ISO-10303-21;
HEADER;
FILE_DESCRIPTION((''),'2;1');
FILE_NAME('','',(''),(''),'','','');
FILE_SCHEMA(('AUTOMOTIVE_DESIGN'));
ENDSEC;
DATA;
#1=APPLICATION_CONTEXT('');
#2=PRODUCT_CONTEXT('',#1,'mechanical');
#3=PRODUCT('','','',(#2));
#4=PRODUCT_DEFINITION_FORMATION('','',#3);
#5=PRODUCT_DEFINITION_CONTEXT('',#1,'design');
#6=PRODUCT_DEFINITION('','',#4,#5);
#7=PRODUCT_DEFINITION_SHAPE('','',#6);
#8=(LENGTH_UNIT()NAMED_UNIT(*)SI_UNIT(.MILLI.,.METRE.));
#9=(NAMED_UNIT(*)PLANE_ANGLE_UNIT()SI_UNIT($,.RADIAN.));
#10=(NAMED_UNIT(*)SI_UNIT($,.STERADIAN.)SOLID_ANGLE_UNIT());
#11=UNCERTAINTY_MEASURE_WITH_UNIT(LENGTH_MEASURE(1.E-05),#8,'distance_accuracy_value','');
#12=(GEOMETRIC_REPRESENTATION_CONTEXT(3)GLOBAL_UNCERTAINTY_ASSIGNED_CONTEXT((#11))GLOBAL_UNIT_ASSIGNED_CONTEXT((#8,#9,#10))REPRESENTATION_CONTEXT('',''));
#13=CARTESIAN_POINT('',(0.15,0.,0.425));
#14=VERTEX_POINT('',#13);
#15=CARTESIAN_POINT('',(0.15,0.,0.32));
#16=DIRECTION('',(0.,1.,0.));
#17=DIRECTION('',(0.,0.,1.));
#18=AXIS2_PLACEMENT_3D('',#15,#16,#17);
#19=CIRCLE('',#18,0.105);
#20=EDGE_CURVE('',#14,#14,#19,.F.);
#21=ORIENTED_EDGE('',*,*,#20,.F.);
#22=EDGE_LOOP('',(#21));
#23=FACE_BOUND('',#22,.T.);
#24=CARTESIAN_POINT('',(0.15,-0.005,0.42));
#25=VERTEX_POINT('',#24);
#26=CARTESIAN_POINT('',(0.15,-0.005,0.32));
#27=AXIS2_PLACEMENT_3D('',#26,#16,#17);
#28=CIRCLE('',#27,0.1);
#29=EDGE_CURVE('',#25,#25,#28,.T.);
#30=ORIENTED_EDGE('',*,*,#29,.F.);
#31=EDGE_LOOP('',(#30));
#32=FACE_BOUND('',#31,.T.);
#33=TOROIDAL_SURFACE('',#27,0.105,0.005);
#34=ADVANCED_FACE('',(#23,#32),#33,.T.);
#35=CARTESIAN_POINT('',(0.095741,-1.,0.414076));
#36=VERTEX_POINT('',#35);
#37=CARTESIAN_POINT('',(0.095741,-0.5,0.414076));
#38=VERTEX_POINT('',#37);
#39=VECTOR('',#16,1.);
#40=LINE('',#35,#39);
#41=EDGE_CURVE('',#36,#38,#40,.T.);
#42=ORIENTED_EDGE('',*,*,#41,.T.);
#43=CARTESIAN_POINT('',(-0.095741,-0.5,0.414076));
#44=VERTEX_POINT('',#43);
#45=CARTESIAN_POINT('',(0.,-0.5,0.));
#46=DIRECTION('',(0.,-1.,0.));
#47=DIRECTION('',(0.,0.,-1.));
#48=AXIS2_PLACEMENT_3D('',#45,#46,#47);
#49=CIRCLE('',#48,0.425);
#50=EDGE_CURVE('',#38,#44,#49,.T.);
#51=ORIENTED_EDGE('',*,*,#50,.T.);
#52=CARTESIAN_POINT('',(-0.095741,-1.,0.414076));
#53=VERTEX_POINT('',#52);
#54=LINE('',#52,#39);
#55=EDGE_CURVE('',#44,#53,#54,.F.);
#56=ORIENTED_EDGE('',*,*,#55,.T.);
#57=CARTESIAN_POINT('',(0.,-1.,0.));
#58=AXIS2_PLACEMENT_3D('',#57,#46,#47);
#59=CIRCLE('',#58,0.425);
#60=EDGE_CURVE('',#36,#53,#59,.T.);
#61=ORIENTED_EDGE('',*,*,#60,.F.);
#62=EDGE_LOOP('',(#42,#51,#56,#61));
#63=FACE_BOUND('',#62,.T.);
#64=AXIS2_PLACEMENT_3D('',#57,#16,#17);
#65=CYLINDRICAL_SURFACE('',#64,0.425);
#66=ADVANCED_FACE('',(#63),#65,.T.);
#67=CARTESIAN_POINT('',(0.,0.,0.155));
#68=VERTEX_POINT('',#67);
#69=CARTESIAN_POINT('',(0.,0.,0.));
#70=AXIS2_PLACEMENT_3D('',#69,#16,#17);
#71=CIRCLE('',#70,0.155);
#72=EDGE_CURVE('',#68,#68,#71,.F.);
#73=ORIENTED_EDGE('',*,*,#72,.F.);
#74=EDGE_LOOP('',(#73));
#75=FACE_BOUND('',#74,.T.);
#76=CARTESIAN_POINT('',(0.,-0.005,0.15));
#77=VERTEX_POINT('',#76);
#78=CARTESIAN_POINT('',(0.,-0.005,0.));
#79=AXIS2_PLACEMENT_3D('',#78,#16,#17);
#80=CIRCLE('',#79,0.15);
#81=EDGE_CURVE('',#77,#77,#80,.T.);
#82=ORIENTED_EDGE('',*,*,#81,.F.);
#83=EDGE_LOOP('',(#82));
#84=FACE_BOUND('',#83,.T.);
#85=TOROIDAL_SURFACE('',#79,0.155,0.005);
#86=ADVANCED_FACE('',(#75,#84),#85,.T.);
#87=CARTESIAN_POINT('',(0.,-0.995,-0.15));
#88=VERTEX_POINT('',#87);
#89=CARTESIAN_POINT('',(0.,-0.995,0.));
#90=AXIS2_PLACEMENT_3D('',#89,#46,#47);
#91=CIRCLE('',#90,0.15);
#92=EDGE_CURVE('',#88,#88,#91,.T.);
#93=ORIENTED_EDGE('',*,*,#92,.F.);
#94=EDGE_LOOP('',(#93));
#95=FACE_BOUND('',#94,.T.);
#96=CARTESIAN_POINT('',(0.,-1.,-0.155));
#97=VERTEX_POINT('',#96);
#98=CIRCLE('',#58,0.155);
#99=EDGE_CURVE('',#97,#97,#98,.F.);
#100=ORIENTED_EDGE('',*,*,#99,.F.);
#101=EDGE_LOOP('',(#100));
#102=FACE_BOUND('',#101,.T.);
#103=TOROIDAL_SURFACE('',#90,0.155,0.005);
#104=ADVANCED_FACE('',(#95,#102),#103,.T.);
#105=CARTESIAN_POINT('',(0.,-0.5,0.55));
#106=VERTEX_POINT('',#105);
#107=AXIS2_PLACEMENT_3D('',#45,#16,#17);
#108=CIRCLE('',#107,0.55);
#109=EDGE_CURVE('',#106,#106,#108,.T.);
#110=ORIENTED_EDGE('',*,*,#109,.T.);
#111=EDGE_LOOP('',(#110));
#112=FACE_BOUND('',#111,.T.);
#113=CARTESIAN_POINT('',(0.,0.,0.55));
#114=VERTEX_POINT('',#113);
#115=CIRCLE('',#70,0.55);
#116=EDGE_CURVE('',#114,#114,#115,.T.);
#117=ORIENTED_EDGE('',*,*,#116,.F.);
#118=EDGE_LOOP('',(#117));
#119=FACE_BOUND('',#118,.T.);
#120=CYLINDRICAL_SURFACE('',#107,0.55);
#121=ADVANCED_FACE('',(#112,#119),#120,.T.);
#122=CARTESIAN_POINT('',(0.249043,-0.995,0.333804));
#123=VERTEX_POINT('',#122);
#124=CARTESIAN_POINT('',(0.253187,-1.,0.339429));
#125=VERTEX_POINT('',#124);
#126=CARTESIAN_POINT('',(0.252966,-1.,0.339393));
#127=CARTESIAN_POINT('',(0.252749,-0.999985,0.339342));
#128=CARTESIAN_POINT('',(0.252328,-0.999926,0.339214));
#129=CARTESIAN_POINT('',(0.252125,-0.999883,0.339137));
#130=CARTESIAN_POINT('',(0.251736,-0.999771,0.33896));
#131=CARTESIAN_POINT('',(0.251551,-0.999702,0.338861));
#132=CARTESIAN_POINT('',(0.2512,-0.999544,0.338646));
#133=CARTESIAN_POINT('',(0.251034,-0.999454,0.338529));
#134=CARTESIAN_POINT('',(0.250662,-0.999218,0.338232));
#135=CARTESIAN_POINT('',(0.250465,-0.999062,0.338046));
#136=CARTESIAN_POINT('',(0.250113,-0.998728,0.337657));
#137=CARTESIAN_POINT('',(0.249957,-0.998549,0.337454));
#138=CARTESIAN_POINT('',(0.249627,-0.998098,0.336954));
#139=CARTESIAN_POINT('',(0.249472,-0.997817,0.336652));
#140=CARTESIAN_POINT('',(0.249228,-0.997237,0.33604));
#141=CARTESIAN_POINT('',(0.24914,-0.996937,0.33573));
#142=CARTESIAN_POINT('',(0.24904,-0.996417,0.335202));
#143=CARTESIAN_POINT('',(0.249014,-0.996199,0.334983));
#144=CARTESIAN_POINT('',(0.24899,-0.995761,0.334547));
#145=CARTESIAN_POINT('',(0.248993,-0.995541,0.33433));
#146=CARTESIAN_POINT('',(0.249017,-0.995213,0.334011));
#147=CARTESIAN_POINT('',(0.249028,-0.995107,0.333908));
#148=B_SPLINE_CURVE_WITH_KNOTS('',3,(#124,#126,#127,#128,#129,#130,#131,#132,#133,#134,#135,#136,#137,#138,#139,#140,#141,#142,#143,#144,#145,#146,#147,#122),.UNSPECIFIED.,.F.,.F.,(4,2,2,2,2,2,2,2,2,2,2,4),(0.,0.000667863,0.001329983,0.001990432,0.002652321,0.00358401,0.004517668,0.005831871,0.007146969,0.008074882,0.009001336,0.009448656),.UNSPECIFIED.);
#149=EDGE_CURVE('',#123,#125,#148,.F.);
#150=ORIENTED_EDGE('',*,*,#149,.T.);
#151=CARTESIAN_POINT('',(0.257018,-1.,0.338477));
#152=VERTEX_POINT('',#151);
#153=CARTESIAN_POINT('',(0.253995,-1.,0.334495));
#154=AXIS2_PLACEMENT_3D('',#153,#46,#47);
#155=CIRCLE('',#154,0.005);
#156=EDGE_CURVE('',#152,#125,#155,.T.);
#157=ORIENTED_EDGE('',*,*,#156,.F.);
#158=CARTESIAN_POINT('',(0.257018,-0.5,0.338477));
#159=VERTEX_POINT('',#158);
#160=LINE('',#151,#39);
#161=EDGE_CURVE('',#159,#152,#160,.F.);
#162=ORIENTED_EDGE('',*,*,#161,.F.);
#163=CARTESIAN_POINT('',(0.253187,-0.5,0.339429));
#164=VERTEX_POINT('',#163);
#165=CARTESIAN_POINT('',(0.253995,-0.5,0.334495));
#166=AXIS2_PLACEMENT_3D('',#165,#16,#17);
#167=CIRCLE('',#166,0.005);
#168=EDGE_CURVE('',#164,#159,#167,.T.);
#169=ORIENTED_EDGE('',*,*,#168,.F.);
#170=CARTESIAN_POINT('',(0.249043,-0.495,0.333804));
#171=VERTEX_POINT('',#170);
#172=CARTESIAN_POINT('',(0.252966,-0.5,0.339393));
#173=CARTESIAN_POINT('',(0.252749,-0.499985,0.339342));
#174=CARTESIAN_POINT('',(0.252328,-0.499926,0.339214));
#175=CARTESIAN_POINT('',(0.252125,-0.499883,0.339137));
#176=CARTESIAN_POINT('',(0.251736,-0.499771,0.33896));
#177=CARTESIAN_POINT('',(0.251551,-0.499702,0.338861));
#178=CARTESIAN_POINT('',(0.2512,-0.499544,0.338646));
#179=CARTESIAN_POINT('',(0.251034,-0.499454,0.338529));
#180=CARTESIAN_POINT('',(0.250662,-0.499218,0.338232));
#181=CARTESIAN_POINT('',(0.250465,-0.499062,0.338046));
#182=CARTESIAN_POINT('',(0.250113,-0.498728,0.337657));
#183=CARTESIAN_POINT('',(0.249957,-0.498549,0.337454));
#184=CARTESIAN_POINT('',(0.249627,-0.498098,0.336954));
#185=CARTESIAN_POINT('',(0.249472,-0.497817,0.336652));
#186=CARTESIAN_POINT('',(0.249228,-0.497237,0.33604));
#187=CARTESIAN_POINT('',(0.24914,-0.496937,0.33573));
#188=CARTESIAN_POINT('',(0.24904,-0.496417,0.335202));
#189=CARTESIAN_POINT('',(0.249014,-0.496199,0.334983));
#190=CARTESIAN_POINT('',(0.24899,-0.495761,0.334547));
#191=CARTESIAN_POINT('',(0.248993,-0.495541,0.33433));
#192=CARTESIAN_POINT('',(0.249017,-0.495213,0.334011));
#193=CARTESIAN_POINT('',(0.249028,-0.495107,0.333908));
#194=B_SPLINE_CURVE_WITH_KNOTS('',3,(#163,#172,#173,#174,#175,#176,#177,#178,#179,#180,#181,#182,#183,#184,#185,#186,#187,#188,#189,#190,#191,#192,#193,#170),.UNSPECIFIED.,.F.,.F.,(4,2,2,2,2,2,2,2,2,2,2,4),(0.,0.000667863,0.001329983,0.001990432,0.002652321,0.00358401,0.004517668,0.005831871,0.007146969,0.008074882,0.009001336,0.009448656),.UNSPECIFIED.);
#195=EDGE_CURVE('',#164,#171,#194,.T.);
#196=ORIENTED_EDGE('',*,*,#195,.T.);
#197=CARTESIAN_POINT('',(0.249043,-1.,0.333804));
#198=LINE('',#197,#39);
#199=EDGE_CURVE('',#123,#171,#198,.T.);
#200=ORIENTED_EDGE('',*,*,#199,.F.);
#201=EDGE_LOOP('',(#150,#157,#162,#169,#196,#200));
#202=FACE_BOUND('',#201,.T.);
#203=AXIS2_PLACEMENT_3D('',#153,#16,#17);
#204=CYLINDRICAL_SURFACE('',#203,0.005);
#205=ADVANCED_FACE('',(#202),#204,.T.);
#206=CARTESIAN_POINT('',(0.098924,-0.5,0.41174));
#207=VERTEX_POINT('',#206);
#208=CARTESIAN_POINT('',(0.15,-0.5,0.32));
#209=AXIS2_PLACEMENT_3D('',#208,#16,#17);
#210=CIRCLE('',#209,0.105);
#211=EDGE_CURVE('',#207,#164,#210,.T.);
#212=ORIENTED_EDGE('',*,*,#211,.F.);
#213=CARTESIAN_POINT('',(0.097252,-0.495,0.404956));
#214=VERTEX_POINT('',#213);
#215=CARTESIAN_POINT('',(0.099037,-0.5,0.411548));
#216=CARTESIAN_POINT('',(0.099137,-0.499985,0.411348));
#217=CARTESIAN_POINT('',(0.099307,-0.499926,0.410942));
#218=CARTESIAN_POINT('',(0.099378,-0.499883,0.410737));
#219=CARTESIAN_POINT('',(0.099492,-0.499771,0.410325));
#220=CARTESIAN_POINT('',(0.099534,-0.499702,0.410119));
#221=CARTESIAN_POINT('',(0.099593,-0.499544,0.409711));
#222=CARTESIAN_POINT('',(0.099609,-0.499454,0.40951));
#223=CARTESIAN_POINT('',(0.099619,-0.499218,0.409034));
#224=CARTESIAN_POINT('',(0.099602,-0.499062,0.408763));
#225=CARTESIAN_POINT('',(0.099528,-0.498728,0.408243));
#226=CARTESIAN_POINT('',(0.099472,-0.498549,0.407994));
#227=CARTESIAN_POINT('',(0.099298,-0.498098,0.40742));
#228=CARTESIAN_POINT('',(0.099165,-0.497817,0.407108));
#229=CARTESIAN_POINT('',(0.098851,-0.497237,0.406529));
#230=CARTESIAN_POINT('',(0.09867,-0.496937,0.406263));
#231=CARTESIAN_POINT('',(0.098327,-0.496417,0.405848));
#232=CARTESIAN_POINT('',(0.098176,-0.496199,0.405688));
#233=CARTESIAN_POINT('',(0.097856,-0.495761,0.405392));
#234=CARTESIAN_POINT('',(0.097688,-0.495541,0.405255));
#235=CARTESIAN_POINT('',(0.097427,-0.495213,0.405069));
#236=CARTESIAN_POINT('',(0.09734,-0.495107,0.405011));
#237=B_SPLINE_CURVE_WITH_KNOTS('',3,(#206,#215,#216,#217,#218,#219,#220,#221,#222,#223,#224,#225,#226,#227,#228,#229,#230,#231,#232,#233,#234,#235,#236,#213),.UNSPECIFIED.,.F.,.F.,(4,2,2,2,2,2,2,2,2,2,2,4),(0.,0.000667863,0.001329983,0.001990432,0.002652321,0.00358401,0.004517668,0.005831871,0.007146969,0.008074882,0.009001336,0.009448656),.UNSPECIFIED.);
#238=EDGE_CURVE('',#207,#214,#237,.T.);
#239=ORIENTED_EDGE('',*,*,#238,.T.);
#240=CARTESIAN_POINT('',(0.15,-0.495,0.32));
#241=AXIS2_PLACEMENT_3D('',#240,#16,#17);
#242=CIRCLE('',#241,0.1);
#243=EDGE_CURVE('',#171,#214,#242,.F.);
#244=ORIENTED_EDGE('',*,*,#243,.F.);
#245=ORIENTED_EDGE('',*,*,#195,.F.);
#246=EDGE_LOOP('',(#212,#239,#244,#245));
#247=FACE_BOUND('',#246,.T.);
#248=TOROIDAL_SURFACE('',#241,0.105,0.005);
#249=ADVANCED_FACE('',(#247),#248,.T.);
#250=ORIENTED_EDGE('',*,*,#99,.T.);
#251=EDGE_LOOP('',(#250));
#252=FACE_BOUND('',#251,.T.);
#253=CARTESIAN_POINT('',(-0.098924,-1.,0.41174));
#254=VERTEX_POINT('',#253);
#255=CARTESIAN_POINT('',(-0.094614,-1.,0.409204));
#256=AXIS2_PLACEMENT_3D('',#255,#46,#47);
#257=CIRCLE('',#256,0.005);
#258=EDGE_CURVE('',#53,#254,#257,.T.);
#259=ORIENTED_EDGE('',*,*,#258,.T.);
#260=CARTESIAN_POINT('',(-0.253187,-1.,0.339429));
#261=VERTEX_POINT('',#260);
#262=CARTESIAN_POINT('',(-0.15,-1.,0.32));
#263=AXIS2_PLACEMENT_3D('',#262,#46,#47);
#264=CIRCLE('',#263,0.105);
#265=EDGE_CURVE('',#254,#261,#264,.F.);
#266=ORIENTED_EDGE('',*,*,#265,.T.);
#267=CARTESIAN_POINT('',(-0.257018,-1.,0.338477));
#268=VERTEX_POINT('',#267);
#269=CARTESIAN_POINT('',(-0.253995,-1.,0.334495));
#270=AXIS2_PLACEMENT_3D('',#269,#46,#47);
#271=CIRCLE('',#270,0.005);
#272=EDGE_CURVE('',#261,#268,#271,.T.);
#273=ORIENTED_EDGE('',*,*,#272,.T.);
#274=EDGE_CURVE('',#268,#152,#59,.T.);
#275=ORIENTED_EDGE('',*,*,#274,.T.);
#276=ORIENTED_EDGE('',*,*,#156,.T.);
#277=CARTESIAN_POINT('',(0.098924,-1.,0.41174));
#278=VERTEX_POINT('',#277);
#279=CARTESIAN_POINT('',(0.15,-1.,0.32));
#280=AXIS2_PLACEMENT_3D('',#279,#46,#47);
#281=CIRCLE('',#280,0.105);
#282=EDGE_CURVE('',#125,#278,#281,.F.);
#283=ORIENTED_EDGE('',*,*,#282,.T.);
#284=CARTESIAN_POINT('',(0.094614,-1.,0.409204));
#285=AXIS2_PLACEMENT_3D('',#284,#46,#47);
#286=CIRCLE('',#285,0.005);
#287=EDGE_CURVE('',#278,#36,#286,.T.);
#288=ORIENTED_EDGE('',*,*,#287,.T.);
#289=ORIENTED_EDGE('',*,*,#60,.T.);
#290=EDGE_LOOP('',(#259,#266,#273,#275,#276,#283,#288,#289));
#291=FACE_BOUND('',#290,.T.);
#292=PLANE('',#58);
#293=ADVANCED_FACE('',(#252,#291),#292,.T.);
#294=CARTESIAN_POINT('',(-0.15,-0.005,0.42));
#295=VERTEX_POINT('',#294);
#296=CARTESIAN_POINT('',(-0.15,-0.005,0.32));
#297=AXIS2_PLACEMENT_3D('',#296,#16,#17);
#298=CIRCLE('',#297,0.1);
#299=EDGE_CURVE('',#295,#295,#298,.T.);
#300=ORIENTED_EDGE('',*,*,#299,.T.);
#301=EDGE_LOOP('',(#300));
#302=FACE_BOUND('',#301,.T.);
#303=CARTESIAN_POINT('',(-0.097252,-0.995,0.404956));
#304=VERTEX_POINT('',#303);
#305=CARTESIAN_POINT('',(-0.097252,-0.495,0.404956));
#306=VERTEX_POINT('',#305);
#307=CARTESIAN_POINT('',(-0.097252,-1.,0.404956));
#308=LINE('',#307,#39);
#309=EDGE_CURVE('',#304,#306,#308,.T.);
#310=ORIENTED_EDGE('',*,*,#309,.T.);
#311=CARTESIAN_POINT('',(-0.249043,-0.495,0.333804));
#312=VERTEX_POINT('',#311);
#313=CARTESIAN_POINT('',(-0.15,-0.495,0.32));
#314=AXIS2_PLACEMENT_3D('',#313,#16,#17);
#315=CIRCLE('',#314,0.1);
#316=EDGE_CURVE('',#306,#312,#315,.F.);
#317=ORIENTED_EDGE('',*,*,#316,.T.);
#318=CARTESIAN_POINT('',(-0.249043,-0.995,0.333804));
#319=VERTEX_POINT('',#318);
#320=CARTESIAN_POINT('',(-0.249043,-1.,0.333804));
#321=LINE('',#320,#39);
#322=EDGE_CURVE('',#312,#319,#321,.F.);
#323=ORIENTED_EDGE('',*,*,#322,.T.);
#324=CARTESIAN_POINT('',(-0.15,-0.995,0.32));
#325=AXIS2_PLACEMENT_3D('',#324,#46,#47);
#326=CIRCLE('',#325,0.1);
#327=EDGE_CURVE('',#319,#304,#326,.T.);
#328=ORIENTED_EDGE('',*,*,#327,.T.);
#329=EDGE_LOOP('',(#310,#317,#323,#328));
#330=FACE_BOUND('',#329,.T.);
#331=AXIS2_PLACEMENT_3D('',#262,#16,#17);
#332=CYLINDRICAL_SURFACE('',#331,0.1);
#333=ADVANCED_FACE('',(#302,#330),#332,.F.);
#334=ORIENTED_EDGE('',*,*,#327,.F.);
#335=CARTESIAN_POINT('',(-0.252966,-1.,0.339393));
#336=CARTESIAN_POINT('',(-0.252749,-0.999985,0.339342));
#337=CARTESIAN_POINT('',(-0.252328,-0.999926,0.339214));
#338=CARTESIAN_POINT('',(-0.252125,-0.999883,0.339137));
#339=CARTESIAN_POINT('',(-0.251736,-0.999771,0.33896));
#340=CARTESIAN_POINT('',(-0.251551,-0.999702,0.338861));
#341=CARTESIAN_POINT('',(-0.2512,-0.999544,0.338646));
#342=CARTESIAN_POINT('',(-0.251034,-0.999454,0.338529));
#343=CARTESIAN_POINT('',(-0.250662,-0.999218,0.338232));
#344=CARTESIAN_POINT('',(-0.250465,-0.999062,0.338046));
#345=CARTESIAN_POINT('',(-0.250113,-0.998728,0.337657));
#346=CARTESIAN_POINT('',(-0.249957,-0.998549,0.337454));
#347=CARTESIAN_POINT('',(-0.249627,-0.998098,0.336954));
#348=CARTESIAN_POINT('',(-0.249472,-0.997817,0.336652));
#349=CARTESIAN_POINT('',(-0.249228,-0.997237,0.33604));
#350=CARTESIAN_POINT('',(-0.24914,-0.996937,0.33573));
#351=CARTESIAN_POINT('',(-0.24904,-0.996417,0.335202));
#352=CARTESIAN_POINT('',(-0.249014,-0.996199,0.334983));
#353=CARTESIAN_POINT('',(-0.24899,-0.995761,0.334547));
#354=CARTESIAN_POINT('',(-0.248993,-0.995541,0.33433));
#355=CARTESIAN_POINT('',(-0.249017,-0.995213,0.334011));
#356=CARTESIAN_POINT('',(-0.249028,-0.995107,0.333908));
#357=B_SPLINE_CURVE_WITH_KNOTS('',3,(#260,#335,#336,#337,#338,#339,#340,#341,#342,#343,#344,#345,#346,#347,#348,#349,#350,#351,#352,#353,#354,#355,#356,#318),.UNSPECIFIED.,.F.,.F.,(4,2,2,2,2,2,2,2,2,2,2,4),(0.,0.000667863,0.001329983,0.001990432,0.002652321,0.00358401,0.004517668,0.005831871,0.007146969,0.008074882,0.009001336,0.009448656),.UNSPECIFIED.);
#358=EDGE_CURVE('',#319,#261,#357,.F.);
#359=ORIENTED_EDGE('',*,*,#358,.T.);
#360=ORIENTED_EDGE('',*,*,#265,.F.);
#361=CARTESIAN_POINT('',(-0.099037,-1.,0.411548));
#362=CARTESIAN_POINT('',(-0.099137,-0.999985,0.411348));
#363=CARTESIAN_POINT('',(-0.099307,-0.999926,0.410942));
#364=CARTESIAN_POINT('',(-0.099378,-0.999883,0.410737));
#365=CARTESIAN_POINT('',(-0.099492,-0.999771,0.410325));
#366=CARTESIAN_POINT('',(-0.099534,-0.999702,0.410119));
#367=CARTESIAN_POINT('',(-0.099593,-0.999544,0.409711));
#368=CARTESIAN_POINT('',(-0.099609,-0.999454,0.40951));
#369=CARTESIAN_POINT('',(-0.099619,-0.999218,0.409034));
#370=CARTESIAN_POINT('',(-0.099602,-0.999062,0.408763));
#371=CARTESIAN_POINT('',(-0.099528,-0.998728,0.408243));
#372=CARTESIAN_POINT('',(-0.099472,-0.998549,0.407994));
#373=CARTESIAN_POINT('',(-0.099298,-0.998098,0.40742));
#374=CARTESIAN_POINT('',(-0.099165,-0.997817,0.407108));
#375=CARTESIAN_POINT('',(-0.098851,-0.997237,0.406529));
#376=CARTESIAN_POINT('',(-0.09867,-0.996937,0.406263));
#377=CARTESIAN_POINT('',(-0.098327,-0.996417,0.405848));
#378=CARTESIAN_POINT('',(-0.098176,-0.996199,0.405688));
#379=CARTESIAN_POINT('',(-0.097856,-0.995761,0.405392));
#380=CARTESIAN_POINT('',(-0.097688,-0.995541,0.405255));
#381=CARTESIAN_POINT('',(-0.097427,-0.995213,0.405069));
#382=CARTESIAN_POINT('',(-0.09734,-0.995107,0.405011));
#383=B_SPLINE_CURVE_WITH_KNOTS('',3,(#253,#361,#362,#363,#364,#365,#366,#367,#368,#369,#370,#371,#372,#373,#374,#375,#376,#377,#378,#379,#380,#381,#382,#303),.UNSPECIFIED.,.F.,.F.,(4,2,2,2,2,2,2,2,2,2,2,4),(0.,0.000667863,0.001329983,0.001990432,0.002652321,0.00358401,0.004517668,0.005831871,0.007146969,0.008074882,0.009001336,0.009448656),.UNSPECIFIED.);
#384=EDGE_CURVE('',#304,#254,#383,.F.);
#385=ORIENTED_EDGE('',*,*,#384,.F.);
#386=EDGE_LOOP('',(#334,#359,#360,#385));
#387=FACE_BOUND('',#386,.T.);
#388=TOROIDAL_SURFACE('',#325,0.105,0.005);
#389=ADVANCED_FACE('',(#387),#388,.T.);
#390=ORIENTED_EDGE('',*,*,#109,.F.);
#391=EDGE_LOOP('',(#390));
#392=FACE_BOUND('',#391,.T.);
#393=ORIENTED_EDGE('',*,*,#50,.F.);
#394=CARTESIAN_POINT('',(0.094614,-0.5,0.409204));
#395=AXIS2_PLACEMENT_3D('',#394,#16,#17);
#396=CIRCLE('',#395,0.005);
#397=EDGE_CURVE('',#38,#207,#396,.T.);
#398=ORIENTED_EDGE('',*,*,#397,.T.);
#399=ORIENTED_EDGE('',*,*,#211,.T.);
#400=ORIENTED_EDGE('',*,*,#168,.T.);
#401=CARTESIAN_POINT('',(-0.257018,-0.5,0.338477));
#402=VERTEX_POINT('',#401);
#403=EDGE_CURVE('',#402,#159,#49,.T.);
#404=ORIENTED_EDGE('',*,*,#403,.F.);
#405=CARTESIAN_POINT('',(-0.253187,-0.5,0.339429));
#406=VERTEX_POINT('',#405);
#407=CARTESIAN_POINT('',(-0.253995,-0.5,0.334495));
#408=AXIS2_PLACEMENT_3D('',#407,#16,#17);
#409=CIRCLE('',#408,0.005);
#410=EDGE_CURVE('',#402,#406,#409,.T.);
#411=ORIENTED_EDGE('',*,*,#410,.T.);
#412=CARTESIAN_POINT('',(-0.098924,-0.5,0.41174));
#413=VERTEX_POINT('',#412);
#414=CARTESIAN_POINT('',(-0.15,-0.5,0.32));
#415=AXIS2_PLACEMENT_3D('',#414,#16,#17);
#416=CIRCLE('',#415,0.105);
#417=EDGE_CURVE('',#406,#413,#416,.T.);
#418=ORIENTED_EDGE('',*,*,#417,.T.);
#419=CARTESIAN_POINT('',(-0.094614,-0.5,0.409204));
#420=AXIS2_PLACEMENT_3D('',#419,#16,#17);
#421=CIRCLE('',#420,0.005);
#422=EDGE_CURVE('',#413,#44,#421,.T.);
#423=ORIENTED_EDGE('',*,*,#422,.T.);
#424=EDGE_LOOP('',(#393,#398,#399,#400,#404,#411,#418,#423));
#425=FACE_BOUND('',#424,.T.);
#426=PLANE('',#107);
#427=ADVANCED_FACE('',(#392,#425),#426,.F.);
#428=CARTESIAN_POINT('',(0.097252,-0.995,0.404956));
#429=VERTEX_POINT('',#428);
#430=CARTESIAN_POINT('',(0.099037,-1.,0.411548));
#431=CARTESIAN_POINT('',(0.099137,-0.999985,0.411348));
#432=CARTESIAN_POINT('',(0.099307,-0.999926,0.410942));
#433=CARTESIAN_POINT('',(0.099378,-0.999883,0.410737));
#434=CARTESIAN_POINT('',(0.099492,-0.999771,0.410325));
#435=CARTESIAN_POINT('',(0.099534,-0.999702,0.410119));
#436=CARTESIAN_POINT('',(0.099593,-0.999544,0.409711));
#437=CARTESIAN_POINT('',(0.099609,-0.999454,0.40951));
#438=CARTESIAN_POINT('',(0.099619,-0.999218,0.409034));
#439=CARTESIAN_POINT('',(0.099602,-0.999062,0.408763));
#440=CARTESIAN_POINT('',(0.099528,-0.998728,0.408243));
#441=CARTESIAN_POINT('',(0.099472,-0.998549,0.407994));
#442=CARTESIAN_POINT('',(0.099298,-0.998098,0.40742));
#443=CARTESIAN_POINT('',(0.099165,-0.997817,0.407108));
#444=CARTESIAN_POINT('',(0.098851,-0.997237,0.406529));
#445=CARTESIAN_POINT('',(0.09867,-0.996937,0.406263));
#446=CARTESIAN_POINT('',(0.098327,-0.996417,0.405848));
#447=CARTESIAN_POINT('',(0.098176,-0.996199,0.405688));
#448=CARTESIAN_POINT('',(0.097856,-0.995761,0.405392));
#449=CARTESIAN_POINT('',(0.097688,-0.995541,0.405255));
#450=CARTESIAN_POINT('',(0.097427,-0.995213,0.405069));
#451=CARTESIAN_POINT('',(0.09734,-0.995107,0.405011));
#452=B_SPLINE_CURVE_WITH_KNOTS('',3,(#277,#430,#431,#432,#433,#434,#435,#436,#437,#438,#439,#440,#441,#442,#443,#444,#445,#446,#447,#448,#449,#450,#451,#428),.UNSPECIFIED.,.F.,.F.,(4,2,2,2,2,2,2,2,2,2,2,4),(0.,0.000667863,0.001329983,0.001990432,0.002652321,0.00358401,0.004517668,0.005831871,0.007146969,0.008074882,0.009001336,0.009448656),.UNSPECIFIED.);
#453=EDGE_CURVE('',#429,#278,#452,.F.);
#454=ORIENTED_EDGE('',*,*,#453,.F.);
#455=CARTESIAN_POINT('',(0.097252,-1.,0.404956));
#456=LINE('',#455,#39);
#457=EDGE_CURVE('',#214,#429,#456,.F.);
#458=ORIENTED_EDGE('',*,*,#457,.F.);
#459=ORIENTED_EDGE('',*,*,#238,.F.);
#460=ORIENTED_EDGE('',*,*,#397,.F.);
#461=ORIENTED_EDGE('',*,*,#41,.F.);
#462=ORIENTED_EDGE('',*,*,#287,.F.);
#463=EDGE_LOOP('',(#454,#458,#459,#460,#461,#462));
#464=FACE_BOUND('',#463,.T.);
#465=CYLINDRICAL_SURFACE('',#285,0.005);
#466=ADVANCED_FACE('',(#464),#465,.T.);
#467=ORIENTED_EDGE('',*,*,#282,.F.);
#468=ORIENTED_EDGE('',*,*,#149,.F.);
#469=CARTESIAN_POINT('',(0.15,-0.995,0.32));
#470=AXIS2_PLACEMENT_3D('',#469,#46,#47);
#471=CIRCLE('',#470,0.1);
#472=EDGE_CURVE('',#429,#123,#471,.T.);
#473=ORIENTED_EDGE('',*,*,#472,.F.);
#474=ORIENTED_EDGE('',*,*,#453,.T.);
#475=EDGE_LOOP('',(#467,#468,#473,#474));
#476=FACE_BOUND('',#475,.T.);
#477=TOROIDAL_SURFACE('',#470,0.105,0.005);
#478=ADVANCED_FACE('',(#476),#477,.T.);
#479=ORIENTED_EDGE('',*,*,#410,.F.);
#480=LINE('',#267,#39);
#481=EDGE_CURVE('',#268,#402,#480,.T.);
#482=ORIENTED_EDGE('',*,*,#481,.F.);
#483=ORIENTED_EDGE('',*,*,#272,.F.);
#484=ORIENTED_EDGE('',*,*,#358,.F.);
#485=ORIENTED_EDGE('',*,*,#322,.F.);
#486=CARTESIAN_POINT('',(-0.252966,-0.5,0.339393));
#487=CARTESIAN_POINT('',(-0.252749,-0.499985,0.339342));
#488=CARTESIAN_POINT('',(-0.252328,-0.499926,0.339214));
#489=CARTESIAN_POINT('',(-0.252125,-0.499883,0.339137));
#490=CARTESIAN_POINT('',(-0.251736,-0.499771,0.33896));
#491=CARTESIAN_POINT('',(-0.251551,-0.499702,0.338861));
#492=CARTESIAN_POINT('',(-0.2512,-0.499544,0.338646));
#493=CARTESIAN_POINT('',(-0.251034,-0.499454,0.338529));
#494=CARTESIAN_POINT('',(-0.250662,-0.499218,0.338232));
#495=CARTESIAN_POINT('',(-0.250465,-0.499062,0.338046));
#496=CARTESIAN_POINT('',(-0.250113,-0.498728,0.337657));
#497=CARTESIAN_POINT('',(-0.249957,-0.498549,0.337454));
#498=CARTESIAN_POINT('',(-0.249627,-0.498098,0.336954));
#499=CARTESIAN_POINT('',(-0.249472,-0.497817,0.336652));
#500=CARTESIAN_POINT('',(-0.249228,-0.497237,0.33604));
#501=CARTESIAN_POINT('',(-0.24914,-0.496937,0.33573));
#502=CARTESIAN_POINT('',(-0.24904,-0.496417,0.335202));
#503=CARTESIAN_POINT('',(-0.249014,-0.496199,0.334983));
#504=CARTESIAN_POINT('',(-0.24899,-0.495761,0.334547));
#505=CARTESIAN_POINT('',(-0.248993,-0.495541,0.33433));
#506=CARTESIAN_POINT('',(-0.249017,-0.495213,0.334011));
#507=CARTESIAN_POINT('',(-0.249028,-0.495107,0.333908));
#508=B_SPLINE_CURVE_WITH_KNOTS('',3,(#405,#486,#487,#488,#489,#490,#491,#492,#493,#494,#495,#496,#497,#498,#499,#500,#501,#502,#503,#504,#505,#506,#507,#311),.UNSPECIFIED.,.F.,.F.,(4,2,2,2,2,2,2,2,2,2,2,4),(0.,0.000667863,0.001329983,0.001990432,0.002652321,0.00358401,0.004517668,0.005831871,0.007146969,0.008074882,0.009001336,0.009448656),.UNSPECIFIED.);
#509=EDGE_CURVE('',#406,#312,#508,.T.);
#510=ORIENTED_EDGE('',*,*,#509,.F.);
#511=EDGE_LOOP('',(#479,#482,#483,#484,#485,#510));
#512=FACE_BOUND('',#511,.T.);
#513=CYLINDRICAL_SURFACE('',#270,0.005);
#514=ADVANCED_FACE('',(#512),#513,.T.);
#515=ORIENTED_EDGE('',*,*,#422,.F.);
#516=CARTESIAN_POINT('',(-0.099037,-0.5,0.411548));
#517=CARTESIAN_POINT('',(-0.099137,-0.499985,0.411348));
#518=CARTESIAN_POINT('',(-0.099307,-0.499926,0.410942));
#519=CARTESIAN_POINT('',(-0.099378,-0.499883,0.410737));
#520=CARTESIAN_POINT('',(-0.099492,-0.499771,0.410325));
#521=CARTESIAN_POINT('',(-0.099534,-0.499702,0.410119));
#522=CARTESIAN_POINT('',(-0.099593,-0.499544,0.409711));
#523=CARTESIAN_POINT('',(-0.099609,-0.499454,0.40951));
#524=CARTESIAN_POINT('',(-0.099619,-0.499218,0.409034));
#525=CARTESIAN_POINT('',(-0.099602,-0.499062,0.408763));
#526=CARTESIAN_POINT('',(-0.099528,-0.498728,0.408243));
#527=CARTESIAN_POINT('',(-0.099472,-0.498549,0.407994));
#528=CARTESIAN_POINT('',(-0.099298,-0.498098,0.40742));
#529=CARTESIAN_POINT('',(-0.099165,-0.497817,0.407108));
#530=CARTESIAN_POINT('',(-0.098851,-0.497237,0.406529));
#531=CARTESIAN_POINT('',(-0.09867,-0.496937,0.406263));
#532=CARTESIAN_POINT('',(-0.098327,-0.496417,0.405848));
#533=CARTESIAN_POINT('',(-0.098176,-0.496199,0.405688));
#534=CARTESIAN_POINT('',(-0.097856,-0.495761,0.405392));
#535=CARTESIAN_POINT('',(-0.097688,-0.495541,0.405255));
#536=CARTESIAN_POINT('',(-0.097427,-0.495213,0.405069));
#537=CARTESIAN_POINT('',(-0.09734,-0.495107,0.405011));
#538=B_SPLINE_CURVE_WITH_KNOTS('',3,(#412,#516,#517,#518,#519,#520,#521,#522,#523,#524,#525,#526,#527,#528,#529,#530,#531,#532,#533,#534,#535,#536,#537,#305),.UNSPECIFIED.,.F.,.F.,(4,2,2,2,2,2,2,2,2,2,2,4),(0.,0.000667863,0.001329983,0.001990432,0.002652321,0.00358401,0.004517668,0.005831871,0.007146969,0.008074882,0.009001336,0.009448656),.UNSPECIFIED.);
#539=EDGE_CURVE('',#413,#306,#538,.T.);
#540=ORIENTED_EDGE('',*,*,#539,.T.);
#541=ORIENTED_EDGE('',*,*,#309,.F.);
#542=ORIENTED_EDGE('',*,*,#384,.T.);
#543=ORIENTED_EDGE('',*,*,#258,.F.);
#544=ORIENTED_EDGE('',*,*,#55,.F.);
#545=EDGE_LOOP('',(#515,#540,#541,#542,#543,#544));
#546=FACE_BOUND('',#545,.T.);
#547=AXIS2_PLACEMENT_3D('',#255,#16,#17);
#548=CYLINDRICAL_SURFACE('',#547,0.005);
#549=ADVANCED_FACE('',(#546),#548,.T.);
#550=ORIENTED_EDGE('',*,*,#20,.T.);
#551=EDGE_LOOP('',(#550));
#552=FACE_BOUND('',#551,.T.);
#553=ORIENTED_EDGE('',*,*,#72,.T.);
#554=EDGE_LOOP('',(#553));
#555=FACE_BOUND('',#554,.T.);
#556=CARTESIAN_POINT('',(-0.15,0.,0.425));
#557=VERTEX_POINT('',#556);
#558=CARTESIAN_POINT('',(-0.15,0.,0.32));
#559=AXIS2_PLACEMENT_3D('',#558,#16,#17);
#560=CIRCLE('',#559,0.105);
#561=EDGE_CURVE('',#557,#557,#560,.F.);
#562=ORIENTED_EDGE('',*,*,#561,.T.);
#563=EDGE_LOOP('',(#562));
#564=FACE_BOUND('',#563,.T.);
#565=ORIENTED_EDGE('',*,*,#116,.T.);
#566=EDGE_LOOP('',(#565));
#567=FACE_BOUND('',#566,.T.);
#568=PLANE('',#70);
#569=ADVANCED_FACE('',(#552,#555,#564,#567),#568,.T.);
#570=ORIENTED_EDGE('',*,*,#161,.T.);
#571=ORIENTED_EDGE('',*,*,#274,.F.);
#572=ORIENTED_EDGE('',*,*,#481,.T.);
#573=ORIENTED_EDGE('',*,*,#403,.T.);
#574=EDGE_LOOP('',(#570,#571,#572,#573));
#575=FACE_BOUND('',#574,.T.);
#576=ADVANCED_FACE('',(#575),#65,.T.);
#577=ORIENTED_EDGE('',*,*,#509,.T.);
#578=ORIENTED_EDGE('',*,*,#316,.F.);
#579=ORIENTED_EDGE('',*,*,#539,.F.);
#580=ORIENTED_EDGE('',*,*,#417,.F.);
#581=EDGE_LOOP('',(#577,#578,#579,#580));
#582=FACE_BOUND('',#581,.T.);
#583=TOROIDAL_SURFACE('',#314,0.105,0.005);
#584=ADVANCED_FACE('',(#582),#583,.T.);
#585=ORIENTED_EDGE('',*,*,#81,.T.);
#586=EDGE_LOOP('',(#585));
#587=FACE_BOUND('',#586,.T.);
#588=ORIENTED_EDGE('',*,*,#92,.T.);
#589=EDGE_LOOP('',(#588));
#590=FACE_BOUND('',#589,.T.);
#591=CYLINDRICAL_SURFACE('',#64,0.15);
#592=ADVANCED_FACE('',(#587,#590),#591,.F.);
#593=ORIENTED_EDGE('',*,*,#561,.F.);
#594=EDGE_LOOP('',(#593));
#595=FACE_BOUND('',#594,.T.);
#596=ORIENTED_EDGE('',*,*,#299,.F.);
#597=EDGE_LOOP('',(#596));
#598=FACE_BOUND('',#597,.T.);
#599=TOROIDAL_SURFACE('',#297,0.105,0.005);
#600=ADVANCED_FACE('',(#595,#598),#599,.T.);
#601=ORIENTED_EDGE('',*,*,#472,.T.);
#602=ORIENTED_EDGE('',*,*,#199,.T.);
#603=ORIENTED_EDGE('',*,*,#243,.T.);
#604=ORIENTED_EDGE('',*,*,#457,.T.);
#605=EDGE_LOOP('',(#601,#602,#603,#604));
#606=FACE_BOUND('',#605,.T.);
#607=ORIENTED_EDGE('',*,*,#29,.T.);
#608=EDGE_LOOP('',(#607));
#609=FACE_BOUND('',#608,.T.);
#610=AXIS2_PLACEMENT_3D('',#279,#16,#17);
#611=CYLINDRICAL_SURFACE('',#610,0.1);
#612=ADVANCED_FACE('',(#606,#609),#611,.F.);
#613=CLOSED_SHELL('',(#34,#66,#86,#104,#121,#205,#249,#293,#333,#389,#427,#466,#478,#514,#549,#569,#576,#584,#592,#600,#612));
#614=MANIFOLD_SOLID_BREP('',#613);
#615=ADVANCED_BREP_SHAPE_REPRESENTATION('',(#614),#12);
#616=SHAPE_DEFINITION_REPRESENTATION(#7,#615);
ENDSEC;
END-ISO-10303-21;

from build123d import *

# Parameters (mm, degrees)
SKETCH1_R           = 0.55
BOSS_EXTRUDE1_DEPTH = 0.5
SKETCH2_R           = 0.425
BOSS_EXTRUDE2_DEPTH = 0.5
SKETCH3_R           = 0.15
SKETCH3_R_2         = 0.1
CUT_EXTRUDE1_DEPTH  = 2.266885946
FILLET5_R           = 0.005


with BuildPart() as part:
    # Sketch1 → Boss-Extrude1 (new body)
    with BuildSketch(Plane(origin=(0, 0, 0), x_dir=(1, 0, 0), z_dir=(0, 1, 0))):
        Circle(SKETCH1_R)
    extrude(amount=-BOSS_EXTRUDE1_DEPTH)

    # Sketch2 → Boss-Extrude2 (add)
    with BuildSketch(Plane.XZ.offset(0.5)):
        Circle(SKETCH2_R)
    extrude(amount=BOSS_EXTRUDE2_DEPTH)

    # Sketch3 → Cut-Extrude1 (cut, through all)
    with BuildSketch(Plane(origin=(0, 0, 0), x_dir=(1, 0, 0), z_dir=(0, 1, 0))):
        Circle(SKETCH3_R)
        with Locations((0.15, -0.32)):
            Circle(SKETCH3_R_2)
        with Locations((-0.15, -0.32)):
            Circle(SKETCH3_R_2)
    extrude(amount=-CUT_EXTRUDE1_DEPTH, mode=Mode.SUBTRACT)

    # Fillet5
    fillet5_edges = [part.edges().sort_by_distance(p)[0] for p in [
        (-0.15, 0, 0),
        (-0.15, -1, 0),
        (0.05, 0, 0.32),
        (0.095958554, -1, 0.235860104),
        (-0.25, 0, 0.32),
        (-0.163220488, -1, 0.220877759),
        (0.246504374, -0.75, 0.346208887),
        (0.108409557, -0.75, 0.410940833),
        (0.192443388, -0.5, 0.410545894),
        (-0.108409557, -0.75, 0.410940833),
        (-0.246504374, -0.75, 0.346208887),
        (-0.192443388, -0.5, 0.410545894),
    ]]
    fillet(fillet5_edges, radius=FILLET5_R)


solid = part.part
